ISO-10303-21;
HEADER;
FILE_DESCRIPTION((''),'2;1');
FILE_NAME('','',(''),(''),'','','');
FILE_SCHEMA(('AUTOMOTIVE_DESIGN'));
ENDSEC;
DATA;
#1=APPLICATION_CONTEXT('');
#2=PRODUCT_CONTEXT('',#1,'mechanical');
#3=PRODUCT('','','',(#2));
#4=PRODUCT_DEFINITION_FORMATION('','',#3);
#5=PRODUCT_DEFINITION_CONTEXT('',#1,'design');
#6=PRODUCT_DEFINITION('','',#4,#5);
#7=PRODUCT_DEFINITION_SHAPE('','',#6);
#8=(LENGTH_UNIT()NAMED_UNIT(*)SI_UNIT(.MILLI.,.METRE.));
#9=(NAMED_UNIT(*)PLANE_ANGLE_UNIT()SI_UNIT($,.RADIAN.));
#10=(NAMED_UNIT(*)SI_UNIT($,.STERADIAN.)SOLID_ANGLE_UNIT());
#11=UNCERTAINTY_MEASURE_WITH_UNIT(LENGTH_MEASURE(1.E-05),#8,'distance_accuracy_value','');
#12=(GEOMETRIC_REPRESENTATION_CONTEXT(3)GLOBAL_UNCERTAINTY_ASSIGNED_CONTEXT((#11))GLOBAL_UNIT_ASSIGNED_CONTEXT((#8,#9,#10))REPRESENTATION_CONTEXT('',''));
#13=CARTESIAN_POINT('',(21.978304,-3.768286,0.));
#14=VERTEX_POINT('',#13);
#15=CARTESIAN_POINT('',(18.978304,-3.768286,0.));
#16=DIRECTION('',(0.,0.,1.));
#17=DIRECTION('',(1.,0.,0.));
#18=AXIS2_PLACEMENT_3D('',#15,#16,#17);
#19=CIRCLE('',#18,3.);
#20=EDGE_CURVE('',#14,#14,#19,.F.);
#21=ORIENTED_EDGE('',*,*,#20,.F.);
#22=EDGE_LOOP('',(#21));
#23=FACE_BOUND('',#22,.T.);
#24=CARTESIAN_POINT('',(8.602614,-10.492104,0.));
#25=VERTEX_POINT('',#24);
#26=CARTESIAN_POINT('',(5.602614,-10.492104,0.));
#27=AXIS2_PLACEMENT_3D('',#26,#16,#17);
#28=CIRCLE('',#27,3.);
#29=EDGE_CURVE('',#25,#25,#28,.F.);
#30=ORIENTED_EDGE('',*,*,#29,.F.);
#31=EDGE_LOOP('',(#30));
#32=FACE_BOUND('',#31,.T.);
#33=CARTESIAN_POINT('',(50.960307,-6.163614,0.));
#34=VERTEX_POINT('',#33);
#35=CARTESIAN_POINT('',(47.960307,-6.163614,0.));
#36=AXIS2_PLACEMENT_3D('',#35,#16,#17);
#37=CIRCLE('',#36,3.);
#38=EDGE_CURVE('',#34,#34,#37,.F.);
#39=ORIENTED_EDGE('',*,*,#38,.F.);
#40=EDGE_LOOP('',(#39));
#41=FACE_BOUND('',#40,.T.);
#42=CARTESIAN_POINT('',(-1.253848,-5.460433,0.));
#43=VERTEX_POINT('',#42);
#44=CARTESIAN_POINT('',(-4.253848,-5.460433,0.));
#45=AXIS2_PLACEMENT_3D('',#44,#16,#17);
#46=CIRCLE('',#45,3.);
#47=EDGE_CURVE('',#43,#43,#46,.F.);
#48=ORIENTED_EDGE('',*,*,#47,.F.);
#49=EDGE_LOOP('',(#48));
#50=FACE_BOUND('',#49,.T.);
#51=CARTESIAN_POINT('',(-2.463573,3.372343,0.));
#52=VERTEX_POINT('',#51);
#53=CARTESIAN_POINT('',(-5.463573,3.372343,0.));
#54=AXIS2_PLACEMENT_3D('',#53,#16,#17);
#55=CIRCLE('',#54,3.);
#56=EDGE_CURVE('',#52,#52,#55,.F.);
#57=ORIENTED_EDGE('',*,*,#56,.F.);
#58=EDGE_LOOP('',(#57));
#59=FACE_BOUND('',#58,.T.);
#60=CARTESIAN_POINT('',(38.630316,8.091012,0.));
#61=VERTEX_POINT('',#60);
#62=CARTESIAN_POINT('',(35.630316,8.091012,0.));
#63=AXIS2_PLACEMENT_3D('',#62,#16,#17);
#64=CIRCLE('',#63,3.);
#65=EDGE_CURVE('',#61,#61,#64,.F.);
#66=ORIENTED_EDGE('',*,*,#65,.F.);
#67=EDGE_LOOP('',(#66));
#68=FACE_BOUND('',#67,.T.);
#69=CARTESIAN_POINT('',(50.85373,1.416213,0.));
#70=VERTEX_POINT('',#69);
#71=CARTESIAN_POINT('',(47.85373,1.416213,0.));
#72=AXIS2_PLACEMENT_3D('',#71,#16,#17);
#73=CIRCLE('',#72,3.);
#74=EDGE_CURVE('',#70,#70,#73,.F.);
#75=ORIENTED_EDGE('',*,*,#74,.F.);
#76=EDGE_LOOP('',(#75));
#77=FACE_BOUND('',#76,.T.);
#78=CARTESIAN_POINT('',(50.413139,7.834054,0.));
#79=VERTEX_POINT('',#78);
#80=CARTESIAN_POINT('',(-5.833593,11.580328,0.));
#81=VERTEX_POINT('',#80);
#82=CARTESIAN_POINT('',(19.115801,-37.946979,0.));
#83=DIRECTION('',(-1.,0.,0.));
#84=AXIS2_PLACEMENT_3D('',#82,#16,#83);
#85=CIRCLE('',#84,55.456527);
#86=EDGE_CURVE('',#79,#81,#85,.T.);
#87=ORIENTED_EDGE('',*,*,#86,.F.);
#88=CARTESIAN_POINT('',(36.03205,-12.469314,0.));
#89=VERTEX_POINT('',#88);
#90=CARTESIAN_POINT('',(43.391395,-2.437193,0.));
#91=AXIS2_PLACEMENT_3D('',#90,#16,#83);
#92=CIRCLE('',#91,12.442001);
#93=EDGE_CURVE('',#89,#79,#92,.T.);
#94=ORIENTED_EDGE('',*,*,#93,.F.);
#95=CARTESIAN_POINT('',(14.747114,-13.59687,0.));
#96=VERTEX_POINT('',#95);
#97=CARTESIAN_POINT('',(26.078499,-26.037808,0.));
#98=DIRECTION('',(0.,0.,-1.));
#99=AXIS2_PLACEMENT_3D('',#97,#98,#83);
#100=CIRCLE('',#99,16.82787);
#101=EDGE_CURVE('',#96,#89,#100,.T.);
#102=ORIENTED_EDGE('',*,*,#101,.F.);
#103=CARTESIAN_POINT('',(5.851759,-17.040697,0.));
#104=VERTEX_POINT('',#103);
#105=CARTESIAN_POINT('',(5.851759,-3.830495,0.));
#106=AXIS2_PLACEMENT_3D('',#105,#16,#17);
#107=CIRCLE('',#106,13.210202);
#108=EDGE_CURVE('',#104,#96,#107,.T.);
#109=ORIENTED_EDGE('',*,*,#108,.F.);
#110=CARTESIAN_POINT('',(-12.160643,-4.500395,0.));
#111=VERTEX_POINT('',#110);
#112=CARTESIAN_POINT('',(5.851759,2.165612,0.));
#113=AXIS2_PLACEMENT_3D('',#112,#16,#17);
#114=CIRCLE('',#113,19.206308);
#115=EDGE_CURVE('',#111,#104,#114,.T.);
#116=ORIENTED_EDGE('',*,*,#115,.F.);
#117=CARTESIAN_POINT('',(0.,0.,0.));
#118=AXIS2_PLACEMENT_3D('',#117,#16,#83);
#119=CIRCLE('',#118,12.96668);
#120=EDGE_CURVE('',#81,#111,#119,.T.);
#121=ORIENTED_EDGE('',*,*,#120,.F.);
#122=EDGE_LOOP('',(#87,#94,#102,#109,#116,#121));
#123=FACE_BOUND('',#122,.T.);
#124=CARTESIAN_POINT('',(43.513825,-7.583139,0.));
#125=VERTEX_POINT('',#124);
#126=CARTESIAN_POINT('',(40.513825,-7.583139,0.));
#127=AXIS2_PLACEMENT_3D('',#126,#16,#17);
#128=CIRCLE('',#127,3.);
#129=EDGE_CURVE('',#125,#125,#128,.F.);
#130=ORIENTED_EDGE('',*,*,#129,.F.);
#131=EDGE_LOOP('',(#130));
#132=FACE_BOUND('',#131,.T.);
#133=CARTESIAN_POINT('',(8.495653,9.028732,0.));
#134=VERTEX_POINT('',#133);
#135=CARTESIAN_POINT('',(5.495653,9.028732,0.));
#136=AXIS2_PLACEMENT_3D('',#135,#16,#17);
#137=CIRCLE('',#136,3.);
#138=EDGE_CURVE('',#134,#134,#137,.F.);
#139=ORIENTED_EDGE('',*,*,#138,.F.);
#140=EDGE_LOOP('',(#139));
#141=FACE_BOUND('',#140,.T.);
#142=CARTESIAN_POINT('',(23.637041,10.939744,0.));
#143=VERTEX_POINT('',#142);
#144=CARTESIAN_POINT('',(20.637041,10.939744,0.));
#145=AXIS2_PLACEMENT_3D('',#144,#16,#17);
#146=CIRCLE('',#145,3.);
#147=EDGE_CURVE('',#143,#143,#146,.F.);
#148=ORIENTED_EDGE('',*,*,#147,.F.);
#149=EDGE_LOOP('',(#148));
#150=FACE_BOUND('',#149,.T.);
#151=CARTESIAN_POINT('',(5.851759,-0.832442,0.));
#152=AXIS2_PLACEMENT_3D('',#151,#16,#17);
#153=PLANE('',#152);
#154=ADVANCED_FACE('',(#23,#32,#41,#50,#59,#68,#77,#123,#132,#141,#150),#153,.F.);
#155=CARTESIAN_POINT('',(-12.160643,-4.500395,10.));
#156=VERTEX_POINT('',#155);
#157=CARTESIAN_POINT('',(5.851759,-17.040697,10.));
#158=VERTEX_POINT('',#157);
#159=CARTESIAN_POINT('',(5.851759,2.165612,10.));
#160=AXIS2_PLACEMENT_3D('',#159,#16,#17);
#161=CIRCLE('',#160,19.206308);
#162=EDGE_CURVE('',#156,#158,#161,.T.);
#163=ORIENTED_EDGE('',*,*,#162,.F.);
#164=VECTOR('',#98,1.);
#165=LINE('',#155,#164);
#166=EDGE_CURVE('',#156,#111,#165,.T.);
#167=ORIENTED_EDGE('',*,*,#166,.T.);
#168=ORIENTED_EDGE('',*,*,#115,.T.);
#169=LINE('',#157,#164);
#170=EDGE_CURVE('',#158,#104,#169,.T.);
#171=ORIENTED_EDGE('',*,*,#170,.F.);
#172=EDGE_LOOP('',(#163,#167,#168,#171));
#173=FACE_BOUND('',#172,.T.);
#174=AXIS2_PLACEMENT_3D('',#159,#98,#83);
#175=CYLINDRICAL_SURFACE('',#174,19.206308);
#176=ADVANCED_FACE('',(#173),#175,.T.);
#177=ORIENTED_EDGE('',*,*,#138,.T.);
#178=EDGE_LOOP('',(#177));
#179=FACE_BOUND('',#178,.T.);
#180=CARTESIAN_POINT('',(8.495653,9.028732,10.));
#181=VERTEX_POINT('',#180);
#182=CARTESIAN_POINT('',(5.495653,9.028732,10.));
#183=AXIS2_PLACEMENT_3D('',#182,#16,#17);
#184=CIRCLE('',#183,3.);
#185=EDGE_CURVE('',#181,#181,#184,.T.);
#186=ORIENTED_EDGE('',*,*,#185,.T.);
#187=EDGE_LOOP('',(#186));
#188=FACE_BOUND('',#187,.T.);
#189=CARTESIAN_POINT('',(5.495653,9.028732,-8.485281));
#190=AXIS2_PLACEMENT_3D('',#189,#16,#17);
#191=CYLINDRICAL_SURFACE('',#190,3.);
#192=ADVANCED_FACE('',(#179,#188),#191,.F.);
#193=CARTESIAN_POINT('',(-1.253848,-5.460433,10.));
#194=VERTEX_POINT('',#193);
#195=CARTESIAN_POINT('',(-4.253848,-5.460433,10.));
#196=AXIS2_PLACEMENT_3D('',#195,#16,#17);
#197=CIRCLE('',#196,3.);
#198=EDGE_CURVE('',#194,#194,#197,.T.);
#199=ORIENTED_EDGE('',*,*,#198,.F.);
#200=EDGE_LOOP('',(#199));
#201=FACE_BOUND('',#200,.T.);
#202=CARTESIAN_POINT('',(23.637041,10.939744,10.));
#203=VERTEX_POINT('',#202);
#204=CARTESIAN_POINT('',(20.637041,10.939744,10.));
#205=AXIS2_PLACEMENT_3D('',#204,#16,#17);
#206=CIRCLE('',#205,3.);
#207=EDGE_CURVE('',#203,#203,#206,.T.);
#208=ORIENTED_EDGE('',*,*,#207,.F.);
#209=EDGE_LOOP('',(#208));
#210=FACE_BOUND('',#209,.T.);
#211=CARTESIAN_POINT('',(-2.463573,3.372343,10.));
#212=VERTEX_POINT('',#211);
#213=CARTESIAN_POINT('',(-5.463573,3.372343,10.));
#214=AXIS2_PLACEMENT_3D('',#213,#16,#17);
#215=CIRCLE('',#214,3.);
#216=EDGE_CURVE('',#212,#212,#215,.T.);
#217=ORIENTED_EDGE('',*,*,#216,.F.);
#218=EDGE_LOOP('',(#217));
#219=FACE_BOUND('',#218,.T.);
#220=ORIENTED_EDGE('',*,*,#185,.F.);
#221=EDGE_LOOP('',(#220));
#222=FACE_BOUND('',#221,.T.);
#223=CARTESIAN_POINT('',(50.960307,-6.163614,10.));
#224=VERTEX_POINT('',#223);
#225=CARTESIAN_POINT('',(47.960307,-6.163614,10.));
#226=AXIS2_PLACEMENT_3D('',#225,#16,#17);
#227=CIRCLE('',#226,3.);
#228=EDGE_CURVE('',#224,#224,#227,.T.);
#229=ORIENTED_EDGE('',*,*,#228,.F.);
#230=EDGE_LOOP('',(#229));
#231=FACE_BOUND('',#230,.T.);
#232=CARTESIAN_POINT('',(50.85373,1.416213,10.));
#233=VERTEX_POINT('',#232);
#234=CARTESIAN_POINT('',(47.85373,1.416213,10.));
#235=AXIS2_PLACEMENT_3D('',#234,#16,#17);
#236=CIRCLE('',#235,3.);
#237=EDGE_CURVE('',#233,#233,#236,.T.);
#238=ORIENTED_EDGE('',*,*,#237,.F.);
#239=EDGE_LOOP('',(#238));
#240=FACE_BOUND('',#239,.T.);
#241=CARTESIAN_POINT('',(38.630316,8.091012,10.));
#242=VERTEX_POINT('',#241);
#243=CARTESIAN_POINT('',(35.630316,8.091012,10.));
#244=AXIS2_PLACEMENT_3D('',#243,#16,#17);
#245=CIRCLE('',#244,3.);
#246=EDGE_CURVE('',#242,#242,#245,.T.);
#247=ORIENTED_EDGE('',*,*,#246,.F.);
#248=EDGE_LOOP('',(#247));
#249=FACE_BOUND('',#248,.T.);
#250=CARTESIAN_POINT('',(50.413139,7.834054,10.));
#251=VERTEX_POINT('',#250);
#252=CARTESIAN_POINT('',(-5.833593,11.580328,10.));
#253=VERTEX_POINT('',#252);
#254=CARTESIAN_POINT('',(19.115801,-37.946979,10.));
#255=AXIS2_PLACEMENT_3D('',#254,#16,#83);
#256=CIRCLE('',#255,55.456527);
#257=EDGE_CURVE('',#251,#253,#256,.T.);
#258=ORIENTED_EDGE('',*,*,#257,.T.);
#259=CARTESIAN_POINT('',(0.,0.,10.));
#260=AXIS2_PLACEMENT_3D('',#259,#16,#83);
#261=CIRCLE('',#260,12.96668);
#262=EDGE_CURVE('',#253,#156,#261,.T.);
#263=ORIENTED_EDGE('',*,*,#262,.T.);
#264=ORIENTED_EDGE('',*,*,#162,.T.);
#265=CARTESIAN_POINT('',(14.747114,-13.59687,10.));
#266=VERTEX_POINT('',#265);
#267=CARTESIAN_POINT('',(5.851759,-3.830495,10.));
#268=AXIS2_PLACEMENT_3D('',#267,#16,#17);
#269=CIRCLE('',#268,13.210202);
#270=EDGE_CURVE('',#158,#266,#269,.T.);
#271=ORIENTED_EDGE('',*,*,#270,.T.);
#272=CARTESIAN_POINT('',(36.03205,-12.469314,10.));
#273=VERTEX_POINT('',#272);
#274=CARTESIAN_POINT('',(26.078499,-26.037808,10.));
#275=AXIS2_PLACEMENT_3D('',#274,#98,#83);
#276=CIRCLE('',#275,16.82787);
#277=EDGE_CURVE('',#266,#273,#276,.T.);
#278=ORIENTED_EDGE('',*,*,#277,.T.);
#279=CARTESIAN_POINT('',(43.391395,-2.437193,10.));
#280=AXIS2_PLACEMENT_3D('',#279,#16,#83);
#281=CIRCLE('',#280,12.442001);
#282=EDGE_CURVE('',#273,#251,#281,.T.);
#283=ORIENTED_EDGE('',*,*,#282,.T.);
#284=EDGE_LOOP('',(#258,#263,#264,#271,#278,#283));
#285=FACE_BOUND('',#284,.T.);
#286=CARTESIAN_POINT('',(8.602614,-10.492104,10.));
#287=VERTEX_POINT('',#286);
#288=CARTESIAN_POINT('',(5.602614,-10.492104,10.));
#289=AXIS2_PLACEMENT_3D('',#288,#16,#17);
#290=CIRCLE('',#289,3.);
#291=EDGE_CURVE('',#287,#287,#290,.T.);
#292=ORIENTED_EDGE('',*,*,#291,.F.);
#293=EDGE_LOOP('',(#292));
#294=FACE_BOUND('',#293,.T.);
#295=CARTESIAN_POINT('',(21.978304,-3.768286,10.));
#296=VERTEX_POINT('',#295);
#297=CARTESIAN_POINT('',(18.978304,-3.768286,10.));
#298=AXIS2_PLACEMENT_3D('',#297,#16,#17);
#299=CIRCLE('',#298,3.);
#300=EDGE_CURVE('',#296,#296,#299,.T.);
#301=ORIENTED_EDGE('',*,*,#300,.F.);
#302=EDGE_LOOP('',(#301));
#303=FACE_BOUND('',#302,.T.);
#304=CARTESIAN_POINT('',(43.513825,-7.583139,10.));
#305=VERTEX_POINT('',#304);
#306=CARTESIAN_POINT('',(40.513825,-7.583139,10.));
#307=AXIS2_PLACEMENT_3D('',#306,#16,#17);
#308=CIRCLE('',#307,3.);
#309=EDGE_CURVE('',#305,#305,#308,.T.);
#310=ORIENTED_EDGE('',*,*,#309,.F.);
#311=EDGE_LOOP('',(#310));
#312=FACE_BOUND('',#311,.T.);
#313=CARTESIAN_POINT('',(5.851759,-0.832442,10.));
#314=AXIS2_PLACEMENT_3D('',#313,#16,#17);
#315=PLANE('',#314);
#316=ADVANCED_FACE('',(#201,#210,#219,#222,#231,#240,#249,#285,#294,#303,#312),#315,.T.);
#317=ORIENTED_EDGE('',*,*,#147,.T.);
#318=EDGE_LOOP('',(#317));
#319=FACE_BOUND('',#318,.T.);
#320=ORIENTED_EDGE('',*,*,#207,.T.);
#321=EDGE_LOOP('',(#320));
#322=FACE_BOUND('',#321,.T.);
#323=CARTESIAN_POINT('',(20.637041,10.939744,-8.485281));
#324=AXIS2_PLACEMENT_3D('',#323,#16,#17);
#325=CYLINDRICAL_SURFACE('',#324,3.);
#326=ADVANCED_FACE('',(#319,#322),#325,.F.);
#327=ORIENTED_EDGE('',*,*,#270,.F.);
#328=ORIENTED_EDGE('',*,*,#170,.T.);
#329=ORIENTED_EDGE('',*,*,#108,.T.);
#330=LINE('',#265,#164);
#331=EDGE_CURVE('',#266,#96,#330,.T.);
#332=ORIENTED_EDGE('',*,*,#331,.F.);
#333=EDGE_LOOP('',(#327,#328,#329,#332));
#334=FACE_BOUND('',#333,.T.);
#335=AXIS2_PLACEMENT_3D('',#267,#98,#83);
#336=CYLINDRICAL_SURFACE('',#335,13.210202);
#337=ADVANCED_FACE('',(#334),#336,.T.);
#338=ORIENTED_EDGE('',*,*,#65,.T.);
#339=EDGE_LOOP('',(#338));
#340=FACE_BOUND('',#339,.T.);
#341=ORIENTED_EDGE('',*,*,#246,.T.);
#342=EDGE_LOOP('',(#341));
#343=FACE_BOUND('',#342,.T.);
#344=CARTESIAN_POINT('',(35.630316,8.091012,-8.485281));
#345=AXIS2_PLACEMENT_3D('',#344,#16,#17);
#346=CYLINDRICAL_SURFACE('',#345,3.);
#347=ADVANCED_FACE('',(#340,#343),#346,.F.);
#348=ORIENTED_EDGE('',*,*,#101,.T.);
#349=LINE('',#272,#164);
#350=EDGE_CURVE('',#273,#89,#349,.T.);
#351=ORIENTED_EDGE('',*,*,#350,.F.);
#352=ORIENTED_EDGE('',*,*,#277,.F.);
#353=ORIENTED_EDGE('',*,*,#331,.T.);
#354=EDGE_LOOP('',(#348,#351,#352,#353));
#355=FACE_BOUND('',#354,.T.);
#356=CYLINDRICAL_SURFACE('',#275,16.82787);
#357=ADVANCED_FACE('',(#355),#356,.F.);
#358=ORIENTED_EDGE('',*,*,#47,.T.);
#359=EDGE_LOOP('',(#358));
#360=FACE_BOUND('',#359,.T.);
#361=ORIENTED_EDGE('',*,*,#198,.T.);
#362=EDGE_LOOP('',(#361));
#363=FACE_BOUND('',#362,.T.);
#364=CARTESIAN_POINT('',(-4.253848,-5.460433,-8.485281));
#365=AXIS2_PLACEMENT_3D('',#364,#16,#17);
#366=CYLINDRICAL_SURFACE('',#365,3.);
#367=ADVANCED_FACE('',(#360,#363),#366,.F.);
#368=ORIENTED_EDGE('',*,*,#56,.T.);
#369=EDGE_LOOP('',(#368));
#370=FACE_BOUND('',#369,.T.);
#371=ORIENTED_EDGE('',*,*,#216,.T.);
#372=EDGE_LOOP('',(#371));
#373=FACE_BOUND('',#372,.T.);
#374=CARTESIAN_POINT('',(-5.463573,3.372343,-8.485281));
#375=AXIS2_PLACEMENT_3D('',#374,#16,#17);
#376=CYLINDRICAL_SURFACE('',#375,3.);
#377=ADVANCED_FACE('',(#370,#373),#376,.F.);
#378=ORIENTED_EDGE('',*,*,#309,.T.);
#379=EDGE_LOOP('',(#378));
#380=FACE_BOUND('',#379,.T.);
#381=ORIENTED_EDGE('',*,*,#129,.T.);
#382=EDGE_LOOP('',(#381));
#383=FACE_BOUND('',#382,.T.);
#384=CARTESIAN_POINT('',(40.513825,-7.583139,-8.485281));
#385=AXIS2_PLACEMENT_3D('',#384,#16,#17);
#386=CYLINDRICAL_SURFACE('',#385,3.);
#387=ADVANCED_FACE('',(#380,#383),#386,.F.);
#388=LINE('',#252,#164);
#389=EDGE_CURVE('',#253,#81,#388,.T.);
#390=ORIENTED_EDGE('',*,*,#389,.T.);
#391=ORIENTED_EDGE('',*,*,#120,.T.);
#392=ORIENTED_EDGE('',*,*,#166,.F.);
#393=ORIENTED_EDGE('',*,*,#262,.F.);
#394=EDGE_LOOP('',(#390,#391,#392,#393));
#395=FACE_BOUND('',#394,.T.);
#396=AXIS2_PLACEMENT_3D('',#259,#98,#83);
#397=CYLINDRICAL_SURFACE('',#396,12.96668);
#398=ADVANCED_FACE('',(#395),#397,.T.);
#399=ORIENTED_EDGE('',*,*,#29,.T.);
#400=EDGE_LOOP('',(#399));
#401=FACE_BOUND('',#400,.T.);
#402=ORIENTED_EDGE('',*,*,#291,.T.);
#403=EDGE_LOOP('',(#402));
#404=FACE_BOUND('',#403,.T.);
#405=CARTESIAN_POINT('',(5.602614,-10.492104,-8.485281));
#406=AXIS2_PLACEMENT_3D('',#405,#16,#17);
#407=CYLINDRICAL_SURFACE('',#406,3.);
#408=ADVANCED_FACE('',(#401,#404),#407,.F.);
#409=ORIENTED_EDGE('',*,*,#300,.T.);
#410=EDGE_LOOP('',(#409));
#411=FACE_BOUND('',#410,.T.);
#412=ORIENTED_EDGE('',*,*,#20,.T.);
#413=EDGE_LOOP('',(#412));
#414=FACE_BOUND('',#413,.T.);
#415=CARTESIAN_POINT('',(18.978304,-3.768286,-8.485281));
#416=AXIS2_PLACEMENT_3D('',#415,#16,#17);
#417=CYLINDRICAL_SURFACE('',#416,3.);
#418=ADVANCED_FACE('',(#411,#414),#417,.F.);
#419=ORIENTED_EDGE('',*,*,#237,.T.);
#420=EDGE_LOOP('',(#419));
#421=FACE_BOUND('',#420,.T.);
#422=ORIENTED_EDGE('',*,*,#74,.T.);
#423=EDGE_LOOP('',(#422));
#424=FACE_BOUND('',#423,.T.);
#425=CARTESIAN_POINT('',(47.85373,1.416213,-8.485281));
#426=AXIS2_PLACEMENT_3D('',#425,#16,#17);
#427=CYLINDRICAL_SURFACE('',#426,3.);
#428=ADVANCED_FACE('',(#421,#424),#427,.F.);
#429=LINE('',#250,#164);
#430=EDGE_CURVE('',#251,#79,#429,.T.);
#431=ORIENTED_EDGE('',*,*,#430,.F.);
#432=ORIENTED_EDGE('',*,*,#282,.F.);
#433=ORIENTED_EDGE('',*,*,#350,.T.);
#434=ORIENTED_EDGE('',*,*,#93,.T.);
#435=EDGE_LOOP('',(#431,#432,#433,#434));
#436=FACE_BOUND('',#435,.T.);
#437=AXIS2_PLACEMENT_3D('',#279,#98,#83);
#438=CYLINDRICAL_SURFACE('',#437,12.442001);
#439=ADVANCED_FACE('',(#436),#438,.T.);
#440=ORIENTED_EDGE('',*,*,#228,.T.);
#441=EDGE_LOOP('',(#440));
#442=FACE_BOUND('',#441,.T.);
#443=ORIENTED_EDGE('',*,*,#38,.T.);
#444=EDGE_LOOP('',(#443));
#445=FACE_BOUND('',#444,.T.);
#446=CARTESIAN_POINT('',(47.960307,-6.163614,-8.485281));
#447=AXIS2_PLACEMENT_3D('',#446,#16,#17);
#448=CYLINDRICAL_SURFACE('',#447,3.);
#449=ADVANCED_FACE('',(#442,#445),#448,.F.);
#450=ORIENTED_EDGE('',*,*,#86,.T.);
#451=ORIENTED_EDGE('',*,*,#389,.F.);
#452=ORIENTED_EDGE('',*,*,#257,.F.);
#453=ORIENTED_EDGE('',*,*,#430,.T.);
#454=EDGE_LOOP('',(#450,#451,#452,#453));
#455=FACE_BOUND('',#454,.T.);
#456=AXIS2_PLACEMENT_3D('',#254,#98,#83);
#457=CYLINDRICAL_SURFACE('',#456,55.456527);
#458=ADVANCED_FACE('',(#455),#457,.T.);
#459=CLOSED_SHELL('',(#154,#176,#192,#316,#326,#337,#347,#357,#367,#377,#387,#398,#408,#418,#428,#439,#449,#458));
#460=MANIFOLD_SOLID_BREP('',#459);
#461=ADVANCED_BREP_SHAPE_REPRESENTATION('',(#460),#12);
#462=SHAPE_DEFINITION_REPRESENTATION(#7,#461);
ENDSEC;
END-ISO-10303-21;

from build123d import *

# Parameters (mm, degrees)
BOSS_EXTRUDE1_DEPTH   = 10
SKETCH2_R             = 3
CUT_EXTRUDE1_DEPTH    = 10
CRVPATTERN1_OUTLINE_R = 3
CRVPATTERN1_DEPTH     = 10


# Read off the part's stored shape, not the designer's step: CrvPattern1
with BuildPart() as part:
    # Sketch1 → Boss-Extrude1 (new body)
    with BuildSketch(Plane.XY):
        with BuildLine():
            ThreePointArc((-12.160643086, -4.500395473), (-12.066298067, 4.747552068), (-5.833593115, 11.580327761))
            ThreePointArc((-5.833593115, 11.580327761), (22.801277697, 17.386949302), (50.413138808, 7.834054132))
            ThreePointArc((50.413138808, 7.834054132), (53.544482095, -9.628731125), (36.032050188, -12.46931353))
            ThreePointArc((36.032050188, -12.46931353), (25.188301018, -9.23349986), (14.747114027, -13.59687016))
            ThreePointArc((14.747114027, -13.59687016), (10.621121624, -16.149691652), (5.851758877, -17.040696634))
            ThreePointArc((5.851758877, -17.040696634), (-5.122139447, -13.59687016), (-12.160643086, -4.500395473))
        make_face()
    extrude(amount=BOSS_EXTRUDE1_DEPTH)

    # Sketch2 → Cut-Extrude1 (cut)
    with BuildSketch(Plane.XY.offset(10)):
        with Locations((5.495652988, 9.028732309)):
            Circle(SKETCH2_R)
    extrude(amount=-CUT_EXTRUDE1_DEPTH, mode=Mode.SUBTRACT)

    # CrvPattern1 outline → CrvPattern1 (cut)
    with BuildSketch(Plane.XY):
        with Locations((-5.463573367, 3.372342928)):
            Circle(CRVPATTERN1_OUTLINE_R)
        with Locations((-4.253847863, -5.460432999)):
            Circle(CRVPATTERN1_OUTLINE_R)
        with Locations((5.602614411, -10.492104281)):
            Circle(CRVPATTERN1_OUTLINE_R)
        with Locations((18.978303952, -3.768285721)):
            Circle(CRVPATTERN1_OUTLINE_R)
        with Locations((40.513825045, -7.583139488)):
            Circle(CRVPATTERN1_OUTLINE_R)
        with Locations((47.960307029, -6.163614465)):
            Circle(CRVPATTERN1_OUTLINE_R)
        with Locations((47.853730427, 1.416213148)):
            Circle(CRVPATTERN1_OUTLINE_R)
        with Locations((35.630316045, 8.091012477)):
            Circle(CRVPATTERN1_OUTLINE_R)
        with Locations((20.637040529, 10.939744191)):
            Circle(CRVPATTERN1_OUTLINE_R)
    extrude(amount=CRVPATTERN1_DEPTH, mode=Mode.SUBTRACT)


solid = part.part
